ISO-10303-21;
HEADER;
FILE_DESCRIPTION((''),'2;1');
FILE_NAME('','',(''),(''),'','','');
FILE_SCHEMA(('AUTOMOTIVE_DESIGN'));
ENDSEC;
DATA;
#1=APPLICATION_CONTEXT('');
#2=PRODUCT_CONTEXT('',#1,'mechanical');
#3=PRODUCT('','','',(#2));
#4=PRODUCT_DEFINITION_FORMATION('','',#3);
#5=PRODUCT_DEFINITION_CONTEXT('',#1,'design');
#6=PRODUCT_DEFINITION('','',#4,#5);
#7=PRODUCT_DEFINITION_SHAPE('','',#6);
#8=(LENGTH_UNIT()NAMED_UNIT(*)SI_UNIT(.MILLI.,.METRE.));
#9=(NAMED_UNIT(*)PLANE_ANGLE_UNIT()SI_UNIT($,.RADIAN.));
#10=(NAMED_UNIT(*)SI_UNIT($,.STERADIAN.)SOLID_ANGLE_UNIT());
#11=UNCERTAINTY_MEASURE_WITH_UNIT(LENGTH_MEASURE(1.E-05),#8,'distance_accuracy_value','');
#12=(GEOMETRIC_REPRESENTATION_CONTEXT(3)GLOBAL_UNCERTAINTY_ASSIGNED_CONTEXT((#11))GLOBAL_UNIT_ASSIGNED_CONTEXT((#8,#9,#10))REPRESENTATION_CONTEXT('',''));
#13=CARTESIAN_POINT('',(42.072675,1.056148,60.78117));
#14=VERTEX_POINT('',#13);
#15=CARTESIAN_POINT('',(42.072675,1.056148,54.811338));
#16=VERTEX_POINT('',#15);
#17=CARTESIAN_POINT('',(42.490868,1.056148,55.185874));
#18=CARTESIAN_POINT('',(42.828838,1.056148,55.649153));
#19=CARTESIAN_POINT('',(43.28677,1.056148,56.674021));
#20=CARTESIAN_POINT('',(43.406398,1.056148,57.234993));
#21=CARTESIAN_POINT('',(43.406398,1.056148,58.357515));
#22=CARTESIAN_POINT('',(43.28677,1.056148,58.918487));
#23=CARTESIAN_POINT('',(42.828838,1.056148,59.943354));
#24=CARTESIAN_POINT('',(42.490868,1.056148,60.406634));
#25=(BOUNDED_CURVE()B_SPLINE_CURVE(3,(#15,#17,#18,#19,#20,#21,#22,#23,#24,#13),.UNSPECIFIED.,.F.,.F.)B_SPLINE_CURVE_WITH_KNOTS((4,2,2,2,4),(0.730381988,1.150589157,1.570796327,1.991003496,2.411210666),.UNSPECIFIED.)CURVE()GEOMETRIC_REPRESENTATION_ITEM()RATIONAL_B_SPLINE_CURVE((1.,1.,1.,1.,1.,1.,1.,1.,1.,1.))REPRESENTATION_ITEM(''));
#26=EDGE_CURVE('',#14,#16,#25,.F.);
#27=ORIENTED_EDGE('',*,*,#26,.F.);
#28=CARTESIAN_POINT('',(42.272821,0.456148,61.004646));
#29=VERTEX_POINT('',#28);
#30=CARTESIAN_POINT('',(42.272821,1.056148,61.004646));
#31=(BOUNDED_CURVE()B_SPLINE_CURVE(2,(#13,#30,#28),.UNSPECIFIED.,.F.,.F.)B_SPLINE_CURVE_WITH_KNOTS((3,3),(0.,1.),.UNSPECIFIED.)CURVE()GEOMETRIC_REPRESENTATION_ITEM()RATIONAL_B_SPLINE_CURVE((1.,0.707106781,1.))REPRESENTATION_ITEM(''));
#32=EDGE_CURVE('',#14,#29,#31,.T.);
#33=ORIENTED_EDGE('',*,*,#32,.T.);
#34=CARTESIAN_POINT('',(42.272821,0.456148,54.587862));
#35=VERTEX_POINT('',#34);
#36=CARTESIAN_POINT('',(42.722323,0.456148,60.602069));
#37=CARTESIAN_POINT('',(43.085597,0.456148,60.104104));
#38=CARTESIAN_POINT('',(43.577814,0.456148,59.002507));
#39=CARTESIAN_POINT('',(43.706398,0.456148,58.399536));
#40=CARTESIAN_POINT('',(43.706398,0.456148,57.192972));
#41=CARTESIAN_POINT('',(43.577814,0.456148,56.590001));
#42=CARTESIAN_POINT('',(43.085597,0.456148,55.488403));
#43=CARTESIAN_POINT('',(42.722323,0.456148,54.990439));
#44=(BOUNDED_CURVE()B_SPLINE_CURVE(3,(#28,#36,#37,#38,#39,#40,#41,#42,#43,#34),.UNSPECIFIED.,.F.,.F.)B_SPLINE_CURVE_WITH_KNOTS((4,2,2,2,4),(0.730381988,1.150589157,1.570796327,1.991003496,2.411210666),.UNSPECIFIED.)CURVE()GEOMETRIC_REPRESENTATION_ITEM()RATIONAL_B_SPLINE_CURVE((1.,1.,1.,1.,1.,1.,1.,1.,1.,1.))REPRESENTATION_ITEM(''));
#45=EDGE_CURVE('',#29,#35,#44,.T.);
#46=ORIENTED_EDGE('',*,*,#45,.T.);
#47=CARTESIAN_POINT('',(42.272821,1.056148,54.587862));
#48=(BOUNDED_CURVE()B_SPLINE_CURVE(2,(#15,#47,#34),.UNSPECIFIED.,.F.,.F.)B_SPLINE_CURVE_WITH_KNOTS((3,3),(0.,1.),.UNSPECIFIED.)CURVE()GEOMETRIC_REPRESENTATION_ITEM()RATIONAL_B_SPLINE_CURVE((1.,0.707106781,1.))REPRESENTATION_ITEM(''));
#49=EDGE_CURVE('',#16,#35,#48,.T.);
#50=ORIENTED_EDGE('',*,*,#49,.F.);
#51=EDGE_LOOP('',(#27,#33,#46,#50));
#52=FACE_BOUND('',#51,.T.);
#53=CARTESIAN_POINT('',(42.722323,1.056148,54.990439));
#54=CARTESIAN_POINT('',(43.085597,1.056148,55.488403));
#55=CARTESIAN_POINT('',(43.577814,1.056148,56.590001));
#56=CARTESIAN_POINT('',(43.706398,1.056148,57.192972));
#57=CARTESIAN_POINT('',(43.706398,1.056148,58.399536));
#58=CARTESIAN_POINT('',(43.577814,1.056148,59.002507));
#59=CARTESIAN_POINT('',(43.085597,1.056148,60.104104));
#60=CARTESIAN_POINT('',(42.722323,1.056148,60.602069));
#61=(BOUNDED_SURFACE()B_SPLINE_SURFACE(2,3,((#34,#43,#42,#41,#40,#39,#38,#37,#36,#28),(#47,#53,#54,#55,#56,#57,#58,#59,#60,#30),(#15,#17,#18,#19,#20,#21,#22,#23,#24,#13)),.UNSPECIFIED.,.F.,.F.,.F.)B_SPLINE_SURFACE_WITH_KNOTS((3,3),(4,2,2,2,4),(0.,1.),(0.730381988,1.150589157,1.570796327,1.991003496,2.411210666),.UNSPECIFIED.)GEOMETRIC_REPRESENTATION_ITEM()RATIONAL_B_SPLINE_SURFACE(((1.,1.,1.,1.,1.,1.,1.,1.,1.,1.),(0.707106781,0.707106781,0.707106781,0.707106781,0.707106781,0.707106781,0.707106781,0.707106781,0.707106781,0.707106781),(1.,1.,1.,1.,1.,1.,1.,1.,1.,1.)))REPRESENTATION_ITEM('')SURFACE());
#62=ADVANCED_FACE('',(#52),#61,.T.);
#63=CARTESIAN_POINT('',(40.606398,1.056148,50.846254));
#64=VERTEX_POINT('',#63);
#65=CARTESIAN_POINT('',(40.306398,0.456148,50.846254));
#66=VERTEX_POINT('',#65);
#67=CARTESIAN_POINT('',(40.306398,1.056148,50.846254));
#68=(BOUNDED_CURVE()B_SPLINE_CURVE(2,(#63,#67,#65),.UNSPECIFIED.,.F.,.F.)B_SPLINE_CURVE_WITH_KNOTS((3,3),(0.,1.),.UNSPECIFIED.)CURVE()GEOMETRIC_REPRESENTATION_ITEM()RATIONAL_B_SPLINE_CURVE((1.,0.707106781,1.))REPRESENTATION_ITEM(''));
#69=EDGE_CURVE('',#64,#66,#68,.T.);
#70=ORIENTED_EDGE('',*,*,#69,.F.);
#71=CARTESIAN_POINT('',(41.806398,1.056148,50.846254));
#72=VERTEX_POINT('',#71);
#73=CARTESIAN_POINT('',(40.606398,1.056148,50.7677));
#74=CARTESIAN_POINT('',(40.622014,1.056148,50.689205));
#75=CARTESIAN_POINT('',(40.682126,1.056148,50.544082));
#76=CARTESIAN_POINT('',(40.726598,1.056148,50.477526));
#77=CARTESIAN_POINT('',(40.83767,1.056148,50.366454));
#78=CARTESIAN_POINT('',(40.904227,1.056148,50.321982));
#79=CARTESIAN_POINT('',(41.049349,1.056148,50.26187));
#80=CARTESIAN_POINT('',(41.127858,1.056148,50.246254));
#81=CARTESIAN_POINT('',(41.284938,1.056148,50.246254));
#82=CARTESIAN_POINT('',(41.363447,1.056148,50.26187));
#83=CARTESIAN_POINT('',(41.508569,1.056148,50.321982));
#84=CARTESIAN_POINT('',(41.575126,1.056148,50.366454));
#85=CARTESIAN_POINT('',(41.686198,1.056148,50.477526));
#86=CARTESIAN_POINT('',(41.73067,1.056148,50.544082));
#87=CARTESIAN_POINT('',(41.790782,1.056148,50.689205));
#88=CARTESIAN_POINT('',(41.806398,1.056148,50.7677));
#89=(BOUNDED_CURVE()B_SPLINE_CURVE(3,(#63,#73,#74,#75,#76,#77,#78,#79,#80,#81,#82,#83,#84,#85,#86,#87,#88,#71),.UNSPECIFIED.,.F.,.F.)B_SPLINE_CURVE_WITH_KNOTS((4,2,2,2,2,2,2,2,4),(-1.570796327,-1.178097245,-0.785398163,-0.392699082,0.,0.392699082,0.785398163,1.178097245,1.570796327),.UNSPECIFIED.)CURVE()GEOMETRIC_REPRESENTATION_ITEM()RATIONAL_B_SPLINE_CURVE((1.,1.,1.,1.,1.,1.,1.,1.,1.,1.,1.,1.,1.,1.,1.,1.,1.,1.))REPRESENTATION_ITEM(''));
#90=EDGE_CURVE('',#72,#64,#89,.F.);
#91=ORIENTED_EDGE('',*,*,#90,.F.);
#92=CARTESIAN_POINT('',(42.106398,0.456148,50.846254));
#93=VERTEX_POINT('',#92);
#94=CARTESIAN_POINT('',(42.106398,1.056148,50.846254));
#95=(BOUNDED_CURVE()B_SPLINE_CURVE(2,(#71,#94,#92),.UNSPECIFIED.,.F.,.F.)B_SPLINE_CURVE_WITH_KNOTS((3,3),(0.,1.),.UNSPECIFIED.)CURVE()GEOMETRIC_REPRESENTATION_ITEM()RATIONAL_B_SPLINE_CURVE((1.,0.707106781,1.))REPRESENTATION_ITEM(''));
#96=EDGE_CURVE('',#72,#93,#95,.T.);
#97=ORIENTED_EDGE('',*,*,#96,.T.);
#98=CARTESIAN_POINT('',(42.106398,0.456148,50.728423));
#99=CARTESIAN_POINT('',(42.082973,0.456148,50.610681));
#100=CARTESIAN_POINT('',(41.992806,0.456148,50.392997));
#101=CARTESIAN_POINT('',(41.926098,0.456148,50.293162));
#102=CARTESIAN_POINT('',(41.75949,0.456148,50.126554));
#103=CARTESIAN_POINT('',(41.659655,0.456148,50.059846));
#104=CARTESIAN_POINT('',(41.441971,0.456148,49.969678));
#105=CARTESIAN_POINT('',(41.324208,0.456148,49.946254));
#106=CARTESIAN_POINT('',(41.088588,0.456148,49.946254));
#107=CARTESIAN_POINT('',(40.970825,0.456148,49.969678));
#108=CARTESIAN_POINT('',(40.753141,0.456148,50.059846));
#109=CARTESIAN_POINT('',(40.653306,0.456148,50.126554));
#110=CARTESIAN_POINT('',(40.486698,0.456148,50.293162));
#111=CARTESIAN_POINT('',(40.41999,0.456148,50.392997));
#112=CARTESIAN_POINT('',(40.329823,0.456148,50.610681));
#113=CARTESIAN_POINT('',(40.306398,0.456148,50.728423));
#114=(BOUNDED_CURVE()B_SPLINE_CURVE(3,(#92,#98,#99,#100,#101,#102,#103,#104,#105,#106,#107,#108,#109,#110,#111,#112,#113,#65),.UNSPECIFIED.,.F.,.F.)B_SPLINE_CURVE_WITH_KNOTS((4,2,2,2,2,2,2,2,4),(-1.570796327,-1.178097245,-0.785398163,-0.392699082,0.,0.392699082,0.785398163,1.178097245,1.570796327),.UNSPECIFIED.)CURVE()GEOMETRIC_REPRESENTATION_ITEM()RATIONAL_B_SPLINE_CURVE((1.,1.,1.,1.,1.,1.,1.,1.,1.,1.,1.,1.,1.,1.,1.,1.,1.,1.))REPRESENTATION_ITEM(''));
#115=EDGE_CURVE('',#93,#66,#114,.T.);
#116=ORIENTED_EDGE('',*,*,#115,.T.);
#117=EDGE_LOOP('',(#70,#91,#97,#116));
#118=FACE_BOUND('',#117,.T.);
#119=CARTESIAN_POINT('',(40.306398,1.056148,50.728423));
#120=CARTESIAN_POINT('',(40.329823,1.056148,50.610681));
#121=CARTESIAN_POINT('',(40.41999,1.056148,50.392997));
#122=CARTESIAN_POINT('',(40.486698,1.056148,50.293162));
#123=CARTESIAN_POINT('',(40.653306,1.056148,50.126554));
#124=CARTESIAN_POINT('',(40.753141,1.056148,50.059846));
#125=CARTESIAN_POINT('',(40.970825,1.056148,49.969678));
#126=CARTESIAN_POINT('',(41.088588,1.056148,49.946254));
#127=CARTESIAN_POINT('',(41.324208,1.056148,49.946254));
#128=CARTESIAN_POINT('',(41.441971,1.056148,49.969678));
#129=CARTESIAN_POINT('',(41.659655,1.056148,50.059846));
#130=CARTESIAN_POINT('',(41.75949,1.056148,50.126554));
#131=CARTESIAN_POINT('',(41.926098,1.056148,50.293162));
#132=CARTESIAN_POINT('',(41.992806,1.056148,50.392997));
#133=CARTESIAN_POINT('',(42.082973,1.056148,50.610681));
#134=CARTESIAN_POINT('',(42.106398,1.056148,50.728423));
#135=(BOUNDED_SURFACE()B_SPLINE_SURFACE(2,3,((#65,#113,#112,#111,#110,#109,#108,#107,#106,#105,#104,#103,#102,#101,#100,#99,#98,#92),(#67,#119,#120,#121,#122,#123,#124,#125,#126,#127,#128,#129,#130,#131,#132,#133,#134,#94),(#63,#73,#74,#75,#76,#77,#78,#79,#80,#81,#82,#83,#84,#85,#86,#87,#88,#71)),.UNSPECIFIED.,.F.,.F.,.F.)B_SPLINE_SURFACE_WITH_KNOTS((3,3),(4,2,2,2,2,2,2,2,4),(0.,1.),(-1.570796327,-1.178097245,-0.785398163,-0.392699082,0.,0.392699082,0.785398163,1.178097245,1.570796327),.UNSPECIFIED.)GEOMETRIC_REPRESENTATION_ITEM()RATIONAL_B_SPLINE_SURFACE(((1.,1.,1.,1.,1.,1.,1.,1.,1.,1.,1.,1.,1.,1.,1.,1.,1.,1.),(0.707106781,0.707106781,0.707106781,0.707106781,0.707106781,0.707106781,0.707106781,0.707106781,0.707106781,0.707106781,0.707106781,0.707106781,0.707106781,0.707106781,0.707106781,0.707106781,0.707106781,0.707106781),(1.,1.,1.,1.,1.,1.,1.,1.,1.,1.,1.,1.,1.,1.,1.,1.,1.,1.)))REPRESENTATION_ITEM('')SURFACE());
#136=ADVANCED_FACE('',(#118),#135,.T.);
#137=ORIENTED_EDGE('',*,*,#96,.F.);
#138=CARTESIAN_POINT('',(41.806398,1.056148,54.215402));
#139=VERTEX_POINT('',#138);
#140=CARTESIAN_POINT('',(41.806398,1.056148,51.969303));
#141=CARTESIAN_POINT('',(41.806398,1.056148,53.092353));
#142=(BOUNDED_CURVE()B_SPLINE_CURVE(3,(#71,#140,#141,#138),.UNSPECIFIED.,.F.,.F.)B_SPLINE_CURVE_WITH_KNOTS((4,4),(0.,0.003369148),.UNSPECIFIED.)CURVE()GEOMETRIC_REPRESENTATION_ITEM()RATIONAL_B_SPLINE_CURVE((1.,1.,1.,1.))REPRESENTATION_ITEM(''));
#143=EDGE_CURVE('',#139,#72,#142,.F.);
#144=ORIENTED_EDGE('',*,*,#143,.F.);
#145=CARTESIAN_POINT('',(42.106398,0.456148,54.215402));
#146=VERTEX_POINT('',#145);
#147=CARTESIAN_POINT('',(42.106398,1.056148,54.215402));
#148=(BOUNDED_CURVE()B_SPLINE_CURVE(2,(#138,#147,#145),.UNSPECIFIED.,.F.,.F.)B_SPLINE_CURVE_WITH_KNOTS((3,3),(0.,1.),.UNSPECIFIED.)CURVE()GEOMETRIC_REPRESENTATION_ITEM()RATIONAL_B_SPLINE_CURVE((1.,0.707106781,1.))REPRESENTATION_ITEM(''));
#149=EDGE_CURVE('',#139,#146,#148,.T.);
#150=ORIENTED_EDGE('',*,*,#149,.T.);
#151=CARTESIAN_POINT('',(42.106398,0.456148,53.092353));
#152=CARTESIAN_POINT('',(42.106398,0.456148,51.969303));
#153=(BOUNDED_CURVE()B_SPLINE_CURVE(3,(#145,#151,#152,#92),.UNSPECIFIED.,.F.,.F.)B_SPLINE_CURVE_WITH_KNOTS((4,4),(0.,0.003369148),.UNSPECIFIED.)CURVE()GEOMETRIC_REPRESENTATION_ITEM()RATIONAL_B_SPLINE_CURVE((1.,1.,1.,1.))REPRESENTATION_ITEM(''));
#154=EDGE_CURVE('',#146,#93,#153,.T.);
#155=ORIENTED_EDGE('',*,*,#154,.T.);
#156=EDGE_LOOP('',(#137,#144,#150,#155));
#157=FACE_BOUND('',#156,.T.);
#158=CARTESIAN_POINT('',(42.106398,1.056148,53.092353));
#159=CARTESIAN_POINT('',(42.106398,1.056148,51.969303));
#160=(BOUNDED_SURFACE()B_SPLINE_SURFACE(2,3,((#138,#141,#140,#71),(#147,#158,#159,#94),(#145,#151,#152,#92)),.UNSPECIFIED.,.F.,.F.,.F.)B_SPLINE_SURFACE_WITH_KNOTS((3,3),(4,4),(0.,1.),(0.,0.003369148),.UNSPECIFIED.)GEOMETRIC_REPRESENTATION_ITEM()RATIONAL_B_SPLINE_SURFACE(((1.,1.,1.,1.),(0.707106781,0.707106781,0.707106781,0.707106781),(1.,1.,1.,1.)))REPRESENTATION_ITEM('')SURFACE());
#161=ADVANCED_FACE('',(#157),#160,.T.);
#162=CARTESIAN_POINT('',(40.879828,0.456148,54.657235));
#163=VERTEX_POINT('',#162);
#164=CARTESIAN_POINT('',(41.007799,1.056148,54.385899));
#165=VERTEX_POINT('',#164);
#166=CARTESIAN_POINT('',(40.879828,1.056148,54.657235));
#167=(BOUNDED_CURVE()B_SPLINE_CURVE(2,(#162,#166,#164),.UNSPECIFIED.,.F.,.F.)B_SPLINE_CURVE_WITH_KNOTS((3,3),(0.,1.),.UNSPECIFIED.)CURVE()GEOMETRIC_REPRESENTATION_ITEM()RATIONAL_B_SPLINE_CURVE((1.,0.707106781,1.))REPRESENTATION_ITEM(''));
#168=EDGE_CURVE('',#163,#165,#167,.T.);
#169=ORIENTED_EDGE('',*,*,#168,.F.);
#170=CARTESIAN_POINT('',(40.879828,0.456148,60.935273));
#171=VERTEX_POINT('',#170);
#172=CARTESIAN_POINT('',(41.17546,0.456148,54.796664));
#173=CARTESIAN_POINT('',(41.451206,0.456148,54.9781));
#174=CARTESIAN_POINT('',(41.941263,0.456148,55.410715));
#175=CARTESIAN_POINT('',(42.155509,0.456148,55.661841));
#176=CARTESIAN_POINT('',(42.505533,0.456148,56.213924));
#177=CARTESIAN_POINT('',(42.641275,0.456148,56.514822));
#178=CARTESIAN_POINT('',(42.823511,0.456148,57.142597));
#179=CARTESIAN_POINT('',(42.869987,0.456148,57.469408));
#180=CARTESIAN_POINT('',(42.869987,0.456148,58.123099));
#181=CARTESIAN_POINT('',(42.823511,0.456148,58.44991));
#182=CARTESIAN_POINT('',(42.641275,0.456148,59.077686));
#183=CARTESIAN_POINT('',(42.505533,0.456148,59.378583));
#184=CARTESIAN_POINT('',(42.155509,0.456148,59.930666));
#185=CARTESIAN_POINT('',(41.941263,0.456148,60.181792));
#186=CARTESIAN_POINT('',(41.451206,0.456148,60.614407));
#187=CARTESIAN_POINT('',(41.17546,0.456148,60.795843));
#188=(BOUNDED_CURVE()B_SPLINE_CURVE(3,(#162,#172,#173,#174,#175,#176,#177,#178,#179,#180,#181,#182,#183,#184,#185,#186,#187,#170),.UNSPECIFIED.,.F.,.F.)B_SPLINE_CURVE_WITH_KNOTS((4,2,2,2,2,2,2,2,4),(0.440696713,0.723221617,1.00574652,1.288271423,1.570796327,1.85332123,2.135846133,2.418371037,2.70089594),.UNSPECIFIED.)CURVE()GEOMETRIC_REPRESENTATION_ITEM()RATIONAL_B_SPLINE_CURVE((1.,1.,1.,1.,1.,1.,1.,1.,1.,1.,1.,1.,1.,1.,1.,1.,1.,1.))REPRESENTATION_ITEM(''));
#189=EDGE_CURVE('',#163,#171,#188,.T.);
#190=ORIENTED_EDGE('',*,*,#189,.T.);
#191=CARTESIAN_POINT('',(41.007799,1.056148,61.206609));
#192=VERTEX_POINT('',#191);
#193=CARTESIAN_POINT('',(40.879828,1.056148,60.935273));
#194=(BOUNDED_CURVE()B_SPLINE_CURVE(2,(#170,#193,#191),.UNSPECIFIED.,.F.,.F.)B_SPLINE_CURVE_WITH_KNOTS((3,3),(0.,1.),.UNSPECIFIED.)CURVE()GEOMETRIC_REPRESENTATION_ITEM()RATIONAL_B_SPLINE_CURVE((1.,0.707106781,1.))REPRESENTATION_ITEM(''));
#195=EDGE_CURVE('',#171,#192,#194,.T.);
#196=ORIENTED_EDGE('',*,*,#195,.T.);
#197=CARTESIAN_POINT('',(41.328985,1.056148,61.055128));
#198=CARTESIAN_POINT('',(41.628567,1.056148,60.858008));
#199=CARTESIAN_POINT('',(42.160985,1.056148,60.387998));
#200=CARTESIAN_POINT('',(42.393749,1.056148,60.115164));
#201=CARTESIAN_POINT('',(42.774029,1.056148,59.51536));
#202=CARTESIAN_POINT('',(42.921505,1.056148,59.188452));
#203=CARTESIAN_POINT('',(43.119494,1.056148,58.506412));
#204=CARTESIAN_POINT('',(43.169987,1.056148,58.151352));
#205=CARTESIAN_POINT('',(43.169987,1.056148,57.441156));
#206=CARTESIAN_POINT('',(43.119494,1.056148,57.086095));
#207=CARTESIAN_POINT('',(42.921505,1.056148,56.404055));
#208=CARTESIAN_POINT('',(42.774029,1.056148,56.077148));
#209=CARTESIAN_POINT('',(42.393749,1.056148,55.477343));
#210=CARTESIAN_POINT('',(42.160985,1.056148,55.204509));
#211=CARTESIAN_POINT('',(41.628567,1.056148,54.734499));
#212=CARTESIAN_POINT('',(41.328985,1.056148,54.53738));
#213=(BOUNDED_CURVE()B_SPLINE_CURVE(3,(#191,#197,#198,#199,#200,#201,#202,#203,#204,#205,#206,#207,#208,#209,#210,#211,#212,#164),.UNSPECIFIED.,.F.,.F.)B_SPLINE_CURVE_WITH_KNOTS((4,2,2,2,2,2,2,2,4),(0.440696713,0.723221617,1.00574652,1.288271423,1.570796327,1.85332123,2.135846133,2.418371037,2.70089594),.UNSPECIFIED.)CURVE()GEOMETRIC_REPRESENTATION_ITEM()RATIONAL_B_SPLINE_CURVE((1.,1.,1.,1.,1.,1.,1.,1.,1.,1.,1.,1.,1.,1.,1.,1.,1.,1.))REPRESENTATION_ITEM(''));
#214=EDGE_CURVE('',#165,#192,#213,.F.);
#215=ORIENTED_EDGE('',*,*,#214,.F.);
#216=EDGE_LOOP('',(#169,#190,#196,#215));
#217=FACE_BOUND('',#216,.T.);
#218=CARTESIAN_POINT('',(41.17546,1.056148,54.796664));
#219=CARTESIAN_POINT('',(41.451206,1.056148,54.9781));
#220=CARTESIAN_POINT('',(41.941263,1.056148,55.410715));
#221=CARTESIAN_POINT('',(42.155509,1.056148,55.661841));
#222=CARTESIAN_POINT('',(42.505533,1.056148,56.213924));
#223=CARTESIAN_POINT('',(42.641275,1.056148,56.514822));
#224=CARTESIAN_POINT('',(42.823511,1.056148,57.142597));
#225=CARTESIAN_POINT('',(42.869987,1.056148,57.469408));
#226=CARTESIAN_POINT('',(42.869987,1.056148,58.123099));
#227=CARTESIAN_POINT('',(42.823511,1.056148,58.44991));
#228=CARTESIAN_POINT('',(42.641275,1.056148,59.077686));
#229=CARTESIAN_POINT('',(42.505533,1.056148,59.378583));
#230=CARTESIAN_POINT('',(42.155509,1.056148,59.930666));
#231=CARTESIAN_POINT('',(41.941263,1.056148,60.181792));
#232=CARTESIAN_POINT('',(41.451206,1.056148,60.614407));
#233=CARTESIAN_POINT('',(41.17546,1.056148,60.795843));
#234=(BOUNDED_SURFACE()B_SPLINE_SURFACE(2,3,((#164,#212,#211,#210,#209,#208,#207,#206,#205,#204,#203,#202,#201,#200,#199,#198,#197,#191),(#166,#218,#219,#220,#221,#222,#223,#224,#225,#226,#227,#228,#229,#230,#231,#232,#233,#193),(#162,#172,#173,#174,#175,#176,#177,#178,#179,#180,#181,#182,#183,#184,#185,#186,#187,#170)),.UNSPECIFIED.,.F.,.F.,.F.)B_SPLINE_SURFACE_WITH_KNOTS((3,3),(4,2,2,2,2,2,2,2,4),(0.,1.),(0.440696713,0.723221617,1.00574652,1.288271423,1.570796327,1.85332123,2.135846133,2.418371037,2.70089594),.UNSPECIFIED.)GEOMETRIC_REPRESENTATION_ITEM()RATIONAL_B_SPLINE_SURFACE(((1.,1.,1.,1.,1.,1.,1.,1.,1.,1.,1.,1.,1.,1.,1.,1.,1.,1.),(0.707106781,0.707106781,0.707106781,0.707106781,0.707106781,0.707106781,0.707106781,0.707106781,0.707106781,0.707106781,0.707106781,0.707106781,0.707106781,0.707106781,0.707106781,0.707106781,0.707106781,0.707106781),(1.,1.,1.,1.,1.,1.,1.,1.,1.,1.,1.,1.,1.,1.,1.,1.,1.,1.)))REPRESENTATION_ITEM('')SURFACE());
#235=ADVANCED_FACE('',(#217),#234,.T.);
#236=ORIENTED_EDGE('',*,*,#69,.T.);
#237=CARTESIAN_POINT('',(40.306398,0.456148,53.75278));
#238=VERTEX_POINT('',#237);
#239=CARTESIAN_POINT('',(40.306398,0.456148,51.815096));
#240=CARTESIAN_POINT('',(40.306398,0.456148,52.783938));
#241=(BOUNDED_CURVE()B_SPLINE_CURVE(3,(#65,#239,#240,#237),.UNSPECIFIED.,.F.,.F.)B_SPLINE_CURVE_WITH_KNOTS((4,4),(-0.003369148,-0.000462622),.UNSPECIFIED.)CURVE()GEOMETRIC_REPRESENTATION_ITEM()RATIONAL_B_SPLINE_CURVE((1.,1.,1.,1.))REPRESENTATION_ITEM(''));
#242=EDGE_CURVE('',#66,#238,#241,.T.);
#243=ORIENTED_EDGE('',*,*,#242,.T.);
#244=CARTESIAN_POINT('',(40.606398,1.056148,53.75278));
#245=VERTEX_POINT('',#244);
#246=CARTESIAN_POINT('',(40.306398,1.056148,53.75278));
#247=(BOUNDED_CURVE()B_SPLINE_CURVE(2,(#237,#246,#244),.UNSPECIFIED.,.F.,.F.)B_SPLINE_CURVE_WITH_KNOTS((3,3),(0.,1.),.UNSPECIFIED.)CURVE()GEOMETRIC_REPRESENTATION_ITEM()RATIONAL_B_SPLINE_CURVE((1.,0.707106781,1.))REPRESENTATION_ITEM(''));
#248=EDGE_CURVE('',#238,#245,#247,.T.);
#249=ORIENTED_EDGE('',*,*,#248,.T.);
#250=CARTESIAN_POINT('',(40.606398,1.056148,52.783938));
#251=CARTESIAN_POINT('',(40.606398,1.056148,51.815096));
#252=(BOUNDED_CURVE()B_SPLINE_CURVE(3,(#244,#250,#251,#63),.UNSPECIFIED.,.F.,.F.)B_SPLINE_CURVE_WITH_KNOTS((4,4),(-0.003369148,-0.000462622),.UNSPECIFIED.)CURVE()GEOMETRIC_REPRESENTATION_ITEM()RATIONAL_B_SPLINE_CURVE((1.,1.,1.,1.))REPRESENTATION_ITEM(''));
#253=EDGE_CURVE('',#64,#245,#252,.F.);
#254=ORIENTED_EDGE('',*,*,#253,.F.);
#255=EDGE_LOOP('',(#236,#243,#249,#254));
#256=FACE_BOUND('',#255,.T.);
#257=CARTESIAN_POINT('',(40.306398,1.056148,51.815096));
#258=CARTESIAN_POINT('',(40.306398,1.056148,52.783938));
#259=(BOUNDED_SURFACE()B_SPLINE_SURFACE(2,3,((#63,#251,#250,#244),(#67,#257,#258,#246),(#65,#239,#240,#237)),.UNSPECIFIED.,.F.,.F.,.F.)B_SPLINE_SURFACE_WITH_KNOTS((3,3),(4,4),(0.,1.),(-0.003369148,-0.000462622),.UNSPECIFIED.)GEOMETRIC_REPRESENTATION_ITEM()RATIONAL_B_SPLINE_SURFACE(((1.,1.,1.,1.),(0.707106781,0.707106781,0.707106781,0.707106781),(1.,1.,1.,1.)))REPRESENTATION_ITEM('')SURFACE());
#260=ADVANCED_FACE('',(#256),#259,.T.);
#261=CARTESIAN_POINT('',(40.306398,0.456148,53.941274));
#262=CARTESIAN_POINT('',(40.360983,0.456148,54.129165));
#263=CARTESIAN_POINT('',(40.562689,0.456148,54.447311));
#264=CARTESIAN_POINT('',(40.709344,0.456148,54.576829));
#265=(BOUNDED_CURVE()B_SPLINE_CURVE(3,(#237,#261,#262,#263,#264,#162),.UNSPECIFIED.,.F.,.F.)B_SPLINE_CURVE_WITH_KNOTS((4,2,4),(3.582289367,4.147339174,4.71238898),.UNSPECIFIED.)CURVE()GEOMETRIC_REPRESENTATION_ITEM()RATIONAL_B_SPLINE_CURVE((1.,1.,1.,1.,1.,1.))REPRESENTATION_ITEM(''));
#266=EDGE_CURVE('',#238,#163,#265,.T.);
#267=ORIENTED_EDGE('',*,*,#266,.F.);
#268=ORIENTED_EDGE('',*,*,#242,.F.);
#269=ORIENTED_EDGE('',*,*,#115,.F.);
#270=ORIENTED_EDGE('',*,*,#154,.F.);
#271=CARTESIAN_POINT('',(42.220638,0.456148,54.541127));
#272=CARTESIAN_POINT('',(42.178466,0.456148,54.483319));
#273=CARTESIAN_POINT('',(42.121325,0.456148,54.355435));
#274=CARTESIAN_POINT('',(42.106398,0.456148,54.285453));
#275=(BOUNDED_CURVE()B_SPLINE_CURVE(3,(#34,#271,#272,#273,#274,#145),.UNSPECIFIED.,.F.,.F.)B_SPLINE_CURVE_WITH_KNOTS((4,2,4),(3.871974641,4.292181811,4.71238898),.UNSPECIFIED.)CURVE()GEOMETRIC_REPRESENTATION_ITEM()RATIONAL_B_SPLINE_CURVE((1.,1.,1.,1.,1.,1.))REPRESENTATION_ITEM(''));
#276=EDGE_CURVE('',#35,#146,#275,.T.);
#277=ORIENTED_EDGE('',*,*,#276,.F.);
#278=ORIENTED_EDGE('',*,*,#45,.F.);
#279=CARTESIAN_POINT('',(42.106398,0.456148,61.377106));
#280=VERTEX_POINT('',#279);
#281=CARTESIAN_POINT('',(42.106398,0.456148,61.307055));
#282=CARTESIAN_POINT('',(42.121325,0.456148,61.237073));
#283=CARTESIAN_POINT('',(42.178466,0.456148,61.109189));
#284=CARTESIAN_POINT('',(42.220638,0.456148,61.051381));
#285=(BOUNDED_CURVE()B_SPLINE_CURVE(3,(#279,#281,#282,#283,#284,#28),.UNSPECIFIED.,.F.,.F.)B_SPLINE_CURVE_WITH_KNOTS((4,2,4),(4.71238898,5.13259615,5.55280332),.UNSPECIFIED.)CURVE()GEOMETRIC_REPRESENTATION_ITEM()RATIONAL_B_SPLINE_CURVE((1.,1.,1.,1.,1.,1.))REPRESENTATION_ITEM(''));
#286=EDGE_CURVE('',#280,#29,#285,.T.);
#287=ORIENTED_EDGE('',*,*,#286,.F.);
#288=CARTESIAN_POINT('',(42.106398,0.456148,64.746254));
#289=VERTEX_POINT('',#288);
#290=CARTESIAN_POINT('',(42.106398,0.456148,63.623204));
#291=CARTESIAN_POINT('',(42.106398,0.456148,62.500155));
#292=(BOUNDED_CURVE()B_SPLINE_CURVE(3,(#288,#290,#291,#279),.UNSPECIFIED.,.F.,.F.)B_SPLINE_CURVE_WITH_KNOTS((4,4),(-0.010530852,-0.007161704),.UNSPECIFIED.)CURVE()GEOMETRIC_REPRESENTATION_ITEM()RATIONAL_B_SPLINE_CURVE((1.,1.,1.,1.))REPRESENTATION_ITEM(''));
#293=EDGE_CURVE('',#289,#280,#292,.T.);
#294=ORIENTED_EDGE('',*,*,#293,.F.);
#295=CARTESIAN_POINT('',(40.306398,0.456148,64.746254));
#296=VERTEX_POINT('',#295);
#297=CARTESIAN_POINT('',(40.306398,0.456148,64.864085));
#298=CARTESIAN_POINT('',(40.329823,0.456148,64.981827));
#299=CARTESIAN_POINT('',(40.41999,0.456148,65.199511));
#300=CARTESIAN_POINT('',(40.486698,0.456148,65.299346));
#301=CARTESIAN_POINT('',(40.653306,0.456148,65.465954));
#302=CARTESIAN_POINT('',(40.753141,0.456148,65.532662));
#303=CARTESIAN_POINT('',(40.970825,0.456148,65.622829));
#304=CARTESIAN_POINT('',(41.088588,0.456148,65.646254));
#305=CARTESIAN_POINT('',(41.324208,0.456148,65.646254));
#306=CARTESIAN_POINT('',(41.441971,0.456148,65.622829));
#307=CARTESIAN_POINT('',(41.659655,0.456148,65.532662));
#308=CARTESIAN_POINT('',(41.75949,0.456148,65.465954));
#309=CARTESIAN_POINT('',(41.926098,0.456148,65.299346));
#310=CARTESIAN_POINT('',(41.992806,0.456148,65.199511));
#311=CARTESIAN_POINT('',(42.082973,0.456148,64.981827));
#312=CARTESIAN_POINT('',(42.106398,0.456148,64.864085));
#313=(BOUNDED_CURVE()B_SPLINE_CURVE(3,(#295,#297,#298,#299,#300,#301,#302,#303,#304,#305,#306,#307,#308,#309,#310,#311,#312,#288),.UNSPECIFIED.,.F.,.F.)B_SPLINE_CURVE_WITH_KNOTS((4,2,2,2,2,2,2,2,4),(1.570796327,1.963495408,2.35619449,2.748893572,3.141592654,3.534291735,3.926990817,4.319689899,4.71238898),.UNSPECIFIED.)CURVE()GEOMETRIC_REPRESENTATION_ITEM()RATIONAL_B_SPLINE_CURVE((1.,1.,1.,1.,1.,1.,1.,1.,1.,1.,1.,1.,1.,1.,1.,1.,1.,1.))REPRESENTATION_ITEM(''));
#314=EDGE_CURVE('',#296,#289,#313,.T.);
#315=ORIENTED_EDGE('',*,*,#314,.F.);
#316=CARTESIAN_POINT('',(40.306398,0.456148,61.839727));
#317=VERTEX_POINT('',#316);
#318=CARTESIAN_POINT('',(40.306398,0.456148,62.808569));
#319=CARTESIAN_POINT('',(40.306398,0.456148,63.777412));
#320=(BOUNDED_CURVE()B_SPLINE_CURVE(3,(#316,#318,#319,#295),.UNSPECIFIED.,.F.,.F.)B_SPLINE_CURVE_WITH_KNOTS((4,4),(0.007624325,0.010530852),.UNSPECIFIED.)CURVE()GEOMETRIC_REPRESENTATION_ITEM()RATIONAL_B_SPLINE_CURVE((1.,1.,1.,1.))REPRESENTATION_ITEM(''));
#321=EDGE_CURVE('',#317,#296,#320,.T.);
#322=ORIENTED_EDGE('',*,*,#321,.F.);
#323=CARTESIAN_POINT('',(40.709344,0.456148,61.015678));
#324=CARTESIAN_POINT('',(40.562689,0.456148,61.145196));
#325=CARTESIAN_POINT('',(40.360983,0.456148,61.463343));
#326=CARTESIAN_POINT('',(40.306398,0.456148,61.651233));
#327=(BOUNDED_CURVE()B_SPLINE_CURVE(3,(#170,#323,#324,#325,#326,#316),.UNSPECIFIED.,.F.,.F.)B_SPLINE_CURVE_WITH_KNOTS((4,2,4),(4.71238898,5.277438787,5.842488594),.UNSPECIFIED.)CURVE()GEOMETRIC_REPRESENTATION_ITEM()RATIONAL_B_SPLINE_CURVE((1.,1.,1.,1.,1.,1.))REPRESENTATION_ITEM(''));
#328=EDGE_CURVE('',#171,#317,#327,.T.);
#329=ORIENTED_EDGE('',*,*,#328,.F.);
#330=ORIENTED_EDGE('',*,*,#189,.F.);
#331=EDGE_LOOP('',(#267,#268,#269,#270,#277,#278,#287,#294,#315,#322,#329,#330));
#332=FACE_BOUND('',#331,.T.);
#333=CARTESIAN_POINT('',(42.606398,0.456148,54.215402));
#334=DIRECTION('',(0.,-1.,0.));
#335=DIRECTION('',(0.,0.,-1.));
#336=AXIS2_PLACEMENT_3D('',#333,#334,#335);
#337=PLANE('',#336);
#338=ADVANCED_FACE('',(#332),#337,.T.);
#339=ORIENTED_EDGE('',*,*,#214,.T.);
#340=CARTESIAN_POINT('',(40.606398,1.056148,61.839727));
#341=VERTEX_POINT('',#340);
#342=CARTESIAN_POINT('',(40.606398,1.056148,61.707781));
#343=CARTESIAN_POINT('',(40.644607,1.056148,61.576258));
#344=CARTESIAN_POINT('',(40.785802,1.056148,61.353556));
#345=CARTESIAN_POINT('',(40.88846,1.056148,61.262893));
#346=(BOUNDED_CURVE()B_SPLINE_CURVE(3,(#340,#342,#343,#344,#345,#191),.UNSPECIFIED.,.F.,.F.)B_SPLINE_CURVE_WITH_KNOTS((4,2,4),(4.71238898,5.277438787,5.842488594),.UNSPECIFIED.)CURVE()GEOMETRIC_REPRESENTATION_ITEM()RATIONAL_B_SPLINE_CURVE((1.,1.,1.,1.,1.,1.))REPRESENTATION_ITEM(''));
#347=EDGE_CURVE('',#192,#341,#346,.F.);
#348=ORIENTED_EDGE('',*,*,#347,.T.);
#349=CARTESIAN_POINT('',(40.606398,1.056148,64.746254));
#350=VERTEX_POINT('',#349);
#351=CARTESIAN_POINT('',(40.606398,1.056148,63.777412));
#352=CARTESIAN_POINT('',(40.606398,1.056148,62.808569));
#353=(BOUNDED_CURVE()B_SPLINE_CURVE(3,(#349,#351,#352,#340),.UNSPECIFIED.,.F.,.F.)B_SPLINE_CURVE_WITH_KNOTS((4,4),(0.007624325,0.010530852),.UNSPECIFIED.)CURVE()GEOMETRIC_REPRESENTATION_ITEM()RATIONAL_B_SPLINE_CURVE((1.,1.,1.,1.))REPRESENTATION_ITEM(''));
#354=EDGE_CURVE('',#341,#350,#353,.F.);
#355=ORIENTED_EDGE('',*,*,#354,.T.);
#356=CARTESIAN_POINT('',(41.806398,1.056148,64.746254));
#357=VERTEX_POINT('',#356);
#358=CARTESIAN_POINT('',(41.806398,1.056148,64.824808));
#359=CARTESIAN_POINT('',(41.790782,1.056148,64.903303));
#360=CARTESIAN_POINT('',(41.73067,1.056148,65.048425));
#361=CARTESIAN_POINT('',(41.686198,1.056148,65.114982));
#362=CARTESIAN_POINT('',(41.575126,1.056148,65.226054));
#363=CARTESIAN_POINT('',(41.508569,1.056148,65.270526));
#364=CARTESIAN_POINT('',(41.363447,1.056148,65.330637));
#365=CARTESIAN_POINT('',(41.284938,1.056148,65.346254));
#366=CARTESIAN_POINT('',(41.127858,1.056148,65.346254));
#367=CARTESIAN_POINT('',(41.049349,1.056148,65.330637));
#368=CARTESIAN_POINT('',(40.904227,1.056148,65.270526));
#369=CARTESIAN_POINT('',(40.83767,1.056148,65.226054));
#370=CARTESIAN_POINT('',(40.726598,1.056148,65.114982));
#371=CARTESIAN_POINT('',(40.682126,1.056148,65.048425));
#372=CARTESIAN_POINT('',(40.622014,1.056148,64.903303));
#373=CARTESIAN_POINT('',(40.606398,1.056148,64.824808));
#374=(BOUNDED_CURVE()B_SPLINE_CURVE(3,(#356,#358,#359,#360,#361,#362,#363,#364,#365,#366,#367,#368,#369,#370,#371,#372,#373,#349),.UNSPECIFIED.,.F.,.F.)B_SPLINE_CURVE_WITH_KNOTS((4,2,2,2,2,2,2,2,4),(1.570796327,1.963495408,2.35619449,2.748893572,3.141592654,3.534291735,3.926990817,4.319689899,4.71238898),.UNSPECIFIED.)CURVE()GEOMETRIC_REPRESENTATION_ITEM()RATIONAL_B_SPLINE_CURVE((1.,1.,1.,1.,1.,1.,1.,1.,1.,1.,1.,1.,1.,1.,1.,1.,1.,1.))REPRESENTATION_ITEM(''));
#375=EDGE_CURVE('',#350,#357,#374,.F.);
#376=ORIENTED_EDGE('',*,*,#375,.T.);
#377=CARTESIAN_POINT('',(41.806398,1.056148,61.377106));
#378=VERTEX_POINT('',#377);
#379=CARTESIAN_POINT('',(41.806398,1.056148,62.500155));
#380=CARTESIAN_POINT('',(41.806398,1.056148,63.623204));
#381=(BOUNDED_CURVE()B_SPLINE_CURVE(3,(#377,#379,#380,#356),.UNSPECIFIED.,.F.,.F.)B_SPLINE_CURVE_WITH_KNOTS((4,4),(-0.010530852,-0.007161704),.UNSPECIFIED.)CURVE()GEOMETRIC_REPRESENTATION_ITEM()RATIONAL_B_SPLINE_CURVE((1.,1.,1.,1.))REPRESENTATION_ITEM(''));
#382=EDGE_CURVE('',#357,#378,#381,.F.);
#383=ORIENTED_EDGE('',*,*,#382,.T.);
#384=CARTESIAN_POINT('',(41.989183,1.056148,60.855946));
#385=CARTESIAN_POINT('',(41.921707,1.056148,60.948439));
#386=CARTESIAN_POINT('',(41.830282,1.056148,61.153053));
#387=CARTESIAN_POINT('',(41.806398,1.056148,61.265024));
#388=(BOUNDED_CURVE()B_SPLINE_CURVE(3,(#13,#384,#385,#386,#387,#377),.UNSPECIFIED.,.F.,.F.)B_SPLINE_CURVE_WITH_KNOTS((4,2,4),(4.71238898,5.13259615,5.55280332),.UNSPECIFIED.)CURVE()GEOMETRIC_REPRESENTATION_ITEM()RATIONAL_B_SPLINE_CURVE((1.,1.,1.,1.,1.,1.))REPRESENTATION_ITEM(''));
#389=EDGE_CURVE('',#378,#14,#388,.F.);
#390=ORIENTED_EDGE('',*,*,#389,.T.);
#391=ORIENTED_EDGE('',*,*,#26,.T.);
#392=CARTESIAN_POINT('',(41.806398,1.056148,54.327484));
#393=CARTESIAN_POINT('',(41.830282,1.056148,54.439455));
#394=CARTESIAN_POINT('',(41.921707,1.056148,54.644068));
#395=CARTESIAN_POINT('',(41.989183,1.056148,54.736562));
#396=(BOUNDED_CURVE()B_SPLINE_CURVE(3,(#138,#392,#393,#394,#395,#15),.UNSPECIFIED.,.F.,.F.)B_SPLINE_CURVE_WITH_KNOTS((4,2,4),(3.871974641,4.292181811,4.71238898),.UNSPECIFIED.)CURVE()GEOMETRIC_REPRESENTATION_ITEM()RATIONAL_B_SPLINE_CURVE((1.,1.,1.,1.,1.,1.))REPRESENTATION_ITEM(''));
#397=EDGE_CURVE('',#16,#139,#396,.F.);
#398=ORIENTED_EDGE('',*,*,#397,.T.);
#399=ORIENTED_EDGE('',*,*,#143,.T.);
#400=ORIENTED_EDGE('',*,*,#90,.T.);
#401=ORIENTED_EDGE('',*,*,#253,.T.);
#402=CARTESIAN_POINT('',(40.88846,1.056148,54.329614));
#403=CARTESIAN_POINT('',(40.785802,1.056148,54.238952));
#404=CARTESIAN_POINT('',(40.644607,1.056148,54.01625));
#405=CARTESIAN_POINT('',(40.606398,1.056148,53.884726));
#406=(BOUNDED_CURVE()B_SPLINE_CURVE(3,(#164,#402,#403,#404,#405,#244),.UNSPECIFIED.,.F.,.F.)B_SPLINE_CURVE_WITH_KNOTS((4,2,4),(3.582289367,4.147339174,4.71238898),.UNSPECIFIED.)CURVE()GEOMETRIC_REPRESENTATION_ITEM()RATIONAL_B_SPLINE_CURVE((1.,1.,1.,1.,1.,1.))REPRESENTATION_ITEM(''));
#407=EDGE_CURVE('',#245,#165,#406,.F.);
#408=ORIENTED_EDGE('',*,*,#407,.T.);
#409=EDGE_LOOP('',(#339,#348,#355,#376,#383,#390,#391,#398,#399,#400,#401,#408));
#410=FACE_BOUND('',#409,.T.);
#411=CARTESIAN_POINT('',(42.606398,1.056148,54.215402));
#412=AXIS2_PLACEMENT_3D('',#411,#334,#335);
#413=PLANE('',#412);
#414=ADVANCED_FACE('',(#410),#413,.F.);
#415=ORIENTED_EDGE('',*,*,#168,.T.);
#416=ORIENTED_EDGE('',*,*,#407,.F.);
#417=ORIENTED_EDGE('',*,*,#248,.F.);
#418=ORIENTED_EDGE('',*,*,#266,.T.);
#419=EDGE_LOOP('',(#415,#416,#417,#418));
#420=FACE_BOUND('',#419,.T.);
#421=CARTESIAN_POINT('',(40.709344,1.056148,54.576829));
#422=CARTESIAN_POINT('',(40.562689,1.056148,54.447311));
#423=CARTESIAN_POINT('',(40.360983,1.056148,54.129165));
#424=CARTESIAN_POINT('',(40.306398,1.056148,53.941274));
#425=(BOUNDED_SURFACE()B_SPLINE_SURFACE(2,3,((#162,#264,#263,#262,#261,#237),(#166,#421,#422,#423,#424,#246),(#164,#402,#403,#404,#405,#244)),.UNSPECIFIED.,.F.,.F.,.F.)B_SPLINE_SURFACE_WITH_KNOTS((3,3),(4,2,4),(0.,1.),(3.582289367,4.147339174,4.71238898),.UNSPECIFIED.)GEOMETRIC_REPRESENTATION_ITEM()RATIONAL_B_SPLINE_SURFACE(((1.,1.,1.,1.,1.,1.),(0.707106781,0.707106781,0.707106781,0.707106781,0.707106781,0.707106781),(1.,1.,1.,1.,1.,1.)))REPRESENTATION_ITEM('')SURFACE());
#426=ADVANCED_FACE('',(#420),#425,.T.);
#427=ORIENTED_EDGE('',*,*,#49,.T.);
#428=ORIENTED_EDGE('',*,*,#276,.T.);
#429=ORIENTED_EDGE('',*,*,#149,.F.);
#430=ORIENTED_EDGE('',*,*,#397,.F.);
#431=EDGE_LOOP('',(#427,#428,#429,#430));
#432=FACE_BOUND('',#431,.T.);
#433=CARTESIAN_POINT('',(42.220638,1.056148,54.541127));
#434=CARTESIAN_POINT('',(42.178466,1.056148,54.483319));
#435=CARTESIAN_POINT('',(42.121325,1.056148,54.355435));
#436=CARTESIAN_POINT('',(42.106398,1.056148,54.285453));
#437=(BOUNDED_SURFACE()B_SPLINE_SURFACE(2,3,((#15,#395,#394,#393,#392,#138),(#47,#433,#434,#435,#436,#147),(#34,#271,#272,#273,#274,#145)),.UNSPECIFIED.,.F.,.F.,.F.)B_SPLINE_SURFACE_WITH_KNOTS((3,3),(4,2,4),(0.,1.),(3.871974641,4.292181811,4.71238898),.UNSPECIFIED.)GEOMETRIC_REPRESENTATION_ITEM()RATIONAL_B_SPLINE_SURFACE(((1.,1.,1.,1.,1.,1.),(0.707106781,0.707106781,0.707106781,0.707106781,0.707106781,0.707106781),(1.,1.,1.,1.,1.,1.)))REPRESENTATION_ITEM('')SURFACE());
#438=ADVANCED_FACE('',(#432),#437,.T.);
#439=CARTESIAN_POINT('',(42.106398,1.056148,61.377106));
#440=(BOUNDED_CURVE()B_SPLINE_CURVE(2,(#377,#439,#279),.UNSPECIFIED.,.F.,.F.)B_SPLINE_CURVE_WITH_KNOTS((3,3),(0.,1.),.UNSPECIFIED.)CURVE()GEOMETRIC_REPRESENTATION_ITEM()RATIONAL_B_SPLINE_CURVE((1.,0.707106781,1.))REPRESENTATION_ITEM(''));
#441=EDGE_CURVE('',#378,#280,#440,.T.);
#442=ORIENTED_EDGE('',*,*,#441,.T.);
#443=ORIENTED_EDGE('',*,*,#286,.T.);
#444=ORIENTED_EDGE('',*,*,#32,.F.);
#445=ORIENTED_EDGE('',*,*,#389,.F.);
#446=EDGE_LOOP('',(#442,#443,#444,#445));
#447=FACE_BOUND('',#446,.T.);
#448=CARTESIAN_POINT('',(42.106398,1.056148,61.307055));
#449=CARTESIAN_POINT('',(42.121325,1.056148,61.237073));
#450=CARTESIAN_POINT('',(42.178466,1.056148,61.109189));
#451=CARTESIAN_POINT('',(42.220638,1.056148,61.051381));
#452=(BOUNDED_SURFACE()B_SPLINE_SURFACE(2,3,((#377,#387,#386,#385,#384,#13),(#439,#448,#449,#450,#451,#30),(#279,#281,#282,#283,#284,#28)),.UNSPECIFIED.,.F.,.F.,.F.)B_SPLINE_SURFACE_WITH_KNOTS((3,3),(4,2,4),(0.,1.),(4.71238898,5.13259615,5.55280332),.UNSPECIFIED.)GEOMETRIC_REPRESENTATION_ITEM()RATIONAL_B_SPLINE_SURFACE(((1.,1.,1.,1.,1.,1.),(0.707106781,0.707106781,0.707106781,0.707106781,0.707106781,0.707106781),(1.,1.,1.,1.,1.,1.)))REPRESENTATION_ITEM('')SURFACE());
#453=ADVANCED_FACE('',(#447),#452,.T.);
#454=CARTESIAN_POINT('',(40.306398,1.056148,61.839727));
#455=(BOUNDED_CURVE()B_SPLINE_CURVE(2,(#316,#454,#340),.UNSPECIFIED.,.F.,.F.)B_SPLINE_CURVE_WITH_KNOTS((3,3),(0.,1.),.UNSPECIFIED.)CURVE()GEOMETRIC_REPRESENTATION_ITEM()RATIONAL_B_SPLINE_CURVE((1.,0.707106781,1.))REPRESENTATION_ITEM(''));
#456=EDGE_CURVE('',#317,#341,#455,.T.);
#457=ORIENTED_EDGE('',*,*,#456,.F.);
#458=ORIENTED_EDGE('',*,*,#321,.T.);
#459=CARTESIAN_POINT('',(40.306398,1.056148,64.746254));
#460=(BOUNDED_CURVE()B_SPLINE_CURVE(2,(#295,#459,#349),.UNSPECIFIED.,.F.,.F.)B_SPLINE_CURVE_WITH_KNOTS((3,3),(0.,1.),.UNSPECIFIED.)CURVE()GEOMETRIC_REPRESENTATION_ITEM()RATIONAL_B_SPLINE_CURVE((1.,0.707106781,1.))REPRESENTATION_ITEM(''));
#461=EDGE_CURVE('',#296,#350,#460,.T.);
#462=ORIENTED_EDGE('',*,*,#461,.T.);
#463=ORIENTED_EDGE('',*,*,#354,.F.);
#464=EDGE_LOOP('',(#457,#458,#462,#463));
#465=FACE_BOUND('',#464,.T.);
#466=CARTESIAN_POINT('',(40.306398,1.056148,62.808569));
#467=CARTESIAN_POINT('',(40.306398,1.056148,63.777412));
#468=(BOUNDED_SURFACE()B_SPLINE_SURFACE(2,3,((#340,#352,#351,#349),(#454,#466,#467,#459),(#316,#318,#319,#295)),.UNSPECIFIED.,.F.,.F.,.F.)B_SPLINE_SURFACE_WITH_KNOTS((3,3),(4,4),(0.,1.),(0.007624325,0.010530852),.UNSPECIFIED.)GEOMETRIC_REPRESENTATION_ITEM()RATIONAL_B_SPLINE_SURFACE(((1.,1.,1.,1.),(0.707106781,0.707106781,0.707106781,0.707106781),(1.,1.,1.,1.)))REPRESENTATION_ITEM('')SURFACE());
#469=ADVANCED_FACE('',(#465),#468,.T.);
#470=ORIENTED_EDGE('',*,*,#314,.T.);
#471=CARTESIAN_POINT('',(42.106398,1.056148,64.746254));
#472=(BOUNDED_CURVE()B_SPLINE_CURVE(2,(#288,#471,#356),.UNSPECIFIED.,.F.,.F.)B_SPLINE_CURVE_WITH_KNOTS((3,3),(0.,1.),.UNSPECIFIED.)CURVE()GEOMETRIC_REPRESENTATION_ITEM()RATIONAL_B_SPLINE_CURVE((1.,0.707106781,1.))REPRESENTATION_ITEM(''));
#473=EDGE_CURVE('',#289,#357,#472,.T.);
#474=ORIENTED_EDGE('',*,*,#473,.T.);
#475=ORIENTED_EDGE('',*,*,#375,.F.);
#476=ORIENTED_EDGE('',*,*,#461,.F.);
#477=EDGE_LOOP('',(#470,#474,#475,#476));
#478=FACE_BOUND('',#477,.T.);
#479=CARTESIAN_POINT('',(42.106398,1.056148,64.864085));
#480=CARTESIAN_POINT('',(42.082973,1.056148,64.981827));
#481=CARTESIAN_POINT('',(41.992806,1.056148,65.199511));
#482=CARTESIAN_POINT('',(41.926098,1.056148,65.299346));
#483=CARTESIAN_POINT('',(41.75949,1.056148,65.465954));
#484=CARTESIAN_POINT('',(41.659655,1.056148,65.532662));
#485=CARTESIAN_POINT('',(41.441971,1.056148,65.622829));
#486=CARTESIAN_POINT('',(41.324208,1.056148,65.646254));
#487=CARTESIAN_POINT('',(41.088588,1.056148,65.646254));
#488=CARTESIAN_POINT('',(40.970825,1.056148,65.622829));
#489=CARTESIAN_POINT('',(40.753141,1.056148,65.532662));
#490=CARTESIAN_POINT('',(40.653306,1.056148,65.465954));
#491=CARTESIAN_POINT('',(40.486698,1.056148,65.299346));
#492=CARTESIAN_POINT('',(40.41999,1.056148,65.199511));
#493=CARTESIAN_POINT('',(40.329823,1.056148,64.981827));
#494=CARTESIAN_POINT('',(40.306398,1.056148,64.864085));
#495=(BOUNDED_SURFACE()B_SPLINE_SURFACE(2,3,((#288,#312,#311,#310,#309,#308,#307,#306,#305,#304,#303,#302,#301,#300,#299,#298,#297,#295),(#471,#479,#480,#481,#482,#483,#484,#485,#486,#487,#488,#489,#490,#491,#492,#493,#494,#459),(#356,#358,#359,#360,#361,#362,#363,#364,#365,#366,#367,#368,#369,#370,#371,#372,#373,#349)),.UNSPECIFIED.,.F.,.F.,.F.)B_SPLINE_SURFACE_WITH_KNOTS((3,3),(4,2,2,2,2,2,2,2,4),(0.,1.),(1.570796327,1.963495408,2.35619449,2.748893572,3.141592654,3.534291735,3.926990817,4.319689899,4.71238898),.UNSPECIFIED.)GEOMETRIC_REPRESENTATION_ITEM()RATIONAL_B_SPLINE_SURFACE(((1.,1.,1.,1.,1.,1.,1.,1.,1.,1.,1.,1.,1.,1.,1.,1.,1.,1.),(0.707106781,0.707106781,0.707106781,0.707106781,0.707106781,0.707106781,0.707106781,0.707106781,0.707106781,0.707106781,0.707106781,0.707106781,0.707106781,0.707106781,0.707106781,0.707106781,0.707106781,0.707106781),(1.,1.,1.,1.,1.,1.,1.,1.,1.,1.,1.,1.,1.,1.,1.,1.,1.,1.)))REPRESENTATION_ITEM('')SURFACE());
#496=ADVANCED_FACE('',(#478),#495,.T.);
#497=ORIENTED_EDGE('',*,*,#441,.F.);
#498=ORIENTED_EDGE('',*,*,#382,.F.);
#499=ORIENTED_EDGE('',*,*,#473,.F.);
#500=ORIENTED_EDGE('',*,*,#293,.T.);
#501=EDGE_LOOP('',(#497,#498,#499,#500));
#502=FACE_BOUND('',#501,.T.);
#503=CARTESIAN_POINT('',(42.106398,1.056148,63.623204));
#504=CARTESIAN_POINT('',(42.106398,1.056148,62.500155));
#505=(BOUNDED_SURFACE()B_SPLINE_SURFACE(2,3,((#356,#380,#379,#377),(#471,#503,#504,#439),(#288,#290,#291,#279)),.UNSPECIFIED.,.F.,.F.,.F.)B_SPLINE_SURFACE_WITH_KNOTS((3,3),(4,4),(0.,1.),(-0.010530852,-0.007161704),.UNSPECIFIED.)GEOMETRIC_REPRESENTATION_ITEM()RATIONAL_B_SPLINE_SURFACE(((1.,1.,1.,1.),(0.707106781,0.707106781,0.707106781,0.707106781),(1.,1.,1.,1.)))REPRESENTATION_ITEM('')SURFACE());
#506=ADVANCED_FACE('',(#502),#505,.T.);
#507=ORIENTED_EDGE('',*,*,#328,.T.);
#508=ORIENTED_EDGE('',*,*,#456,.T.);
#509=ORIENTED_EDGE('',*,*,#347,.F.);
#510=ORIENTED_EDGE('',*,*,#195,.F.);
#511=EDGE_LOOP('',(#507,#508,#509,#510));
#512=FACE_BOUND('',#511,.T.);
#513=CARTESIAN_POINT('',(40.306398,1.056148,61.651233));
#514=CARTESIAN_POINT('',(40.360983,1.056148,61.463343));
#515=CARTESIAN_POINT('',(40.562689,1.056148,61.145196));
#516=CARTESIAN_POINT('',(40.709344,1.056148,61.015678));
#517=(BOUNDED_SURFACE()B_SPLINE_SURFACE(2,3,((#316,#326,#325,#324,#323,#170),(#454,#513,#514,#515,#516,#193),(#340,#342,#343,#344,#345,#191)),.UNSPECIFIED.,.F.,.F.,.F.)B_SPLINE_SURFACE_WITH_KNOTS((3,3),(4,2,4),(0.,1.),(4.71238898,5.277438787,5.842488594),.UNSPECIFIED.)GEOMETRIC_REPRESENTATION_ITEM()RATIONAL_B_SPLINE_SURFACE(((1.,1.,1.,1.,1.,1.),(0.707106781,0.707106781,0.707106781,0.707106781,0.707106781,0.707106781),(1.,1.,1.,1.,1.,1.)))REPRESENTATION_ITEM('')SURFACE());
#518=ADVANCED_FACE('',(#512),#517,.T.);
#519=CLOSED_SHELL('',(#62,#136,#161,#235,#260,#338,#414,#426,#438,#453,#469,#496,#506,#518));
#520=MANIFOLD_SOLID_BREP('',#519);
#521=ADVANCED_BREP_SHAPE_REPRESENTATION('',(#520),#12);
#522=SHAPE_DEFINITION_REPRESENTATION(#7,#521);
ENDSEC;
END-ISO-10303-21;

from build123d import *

# Parameters (mm, degrees)
SALIENTE_EXTRUIR1_DEPTH = 0.6
REDONDEO2_SIZE          = 0.6
REDONDEO2_SIZE_2        = 0.3


with BuildPart() as part:
    # Croquis1 → Saliente-Extruir1 (new body)
    with BuildSketch(Plane(origin=(0, 0.456148123, 0), x_dir=(1, 0, 0), z_dir=(0, 1, 0))):
        with BuildLine():
            Line((42.106397954, -64.746253755), (42.106397954, -61.377105609))
            ThreePointArc((42.106397954, -61.377105609), (42.149895732, -61.173130805), (42.272820837, -61.004645803))
            ThreePointArc((42.272820837, -61.004645803), (43.706397954, -57.796253755), (42.272820837, -54.587861707))
            ThreePointArc((42.272820837, -54.587861707), (42.149895732, -54.419376705), (42.106397954, -54.215401901))
            Line((42.106397954, -54.215401901), (42.106397954, -50.846253755))
            ThreePointArc((42.106397954, -50.846253755), (41.206397954, -49.946253755), (40.306397954, -50.846253755))
            Line((40.306397954, -50.846253755), (40.306397954, -53.752780221))
            ThreePointArc((40.306397954, -53.752780221), (40.461836022, -54.288238102), (40.87982824, -54.657234907))
            ThreePointArc((40.87982824, -54.657234907), (42.869987065, -57.796253755), (40.87982824, -60.935272603))
            ThreePointArc((40.87982824, -60.935272603), (40.461836022, -61.304269408), (40.306397954, -61.839727289))
            Line((40.306397954, -61.839727289), (40.306397954, -64.746253755))
            ThreePointArc((40.306397954, -64.746253755), (41.206397954, -65.646253755), (42.106397954, -64.746253755))
        make_face()
    extrude(amount=SALIENTE_EXTRUIR1_DEPTH)

    # Redondeo2
    # an asymmetric fillet: 0.6, 0.3 mm, written as the material it takes off along each edge
    with BuildSketch(Plane(origin=(40.306397954, 1.056148123, 50.846253755), x_dir=(0, -1, 0), z_dir=(0, 0, 1)), Plane(origin=(40.306397954, 1.056148123, 61.839727289), x_dir=(0, -1, 0), z_dir=(0, 0, 1))) as redondeo2_piece_1:
        with BuildLine():
            Bezier((REDONDEO2_SIZE, 0), (0, 0), (0, REDONDEO2_SIZE_2), weights=[1, 0.707106781, 1])
            Line((0, REDONDEO2_SIZE_2), (0, 0))
            Line((0, 0), (REDONDEO2_SIZE, 0))
        make_face()
    extrude(amount=2.906526466, mode=Mode.SUBTRACT)
    with BuildSketch(Plane(origin=(41.206397954, 1.056148123, 50.846253755), x_dir=(1, 0, 0), z_dir=(0, 0, 1))) as redondeo2_piece_2:
        with BuildLine():
            Bezier((0.9, -REDONDEO2_SIZE), (0.9, 0), (0.9 - REDONDEO2_SIZE_2, 0), weights=[1, 0.707106781, 1])
            Line((0.9 - REDONDEO2_SIZE_2, 0), (0.9, 0))
            Line((0.9, 0), (0.9, -REDONDEO2_SIZE))
        make_face()
    revolve(axis=Axis((41.206397954, 1.056148123, 50.846253755), (0, 1, 0)), revolution_arc=180, mode=Mode.SUBTRACT)
    with BuildSketch(Plane(origin=(39.399366704, 1.056148123, 57.796253755), x_dir=(0.4265697142932218, 0, -0.9044546859007361), z_dir=(-0.9044546859007361, 0, -0.4265697142932218))) as redondeo2_piece_3:
        with BuildLine():
            Bezier((3.470620361, REDONDEO2_SIZE), (3.470620361, 0), (3.470620361 + REDONDEO2_SIZE_2, 0), weights=[1, 0.707106781, 1])
            Line((3.470620361 + REDONDEO2_SIZE_2, 0), (3.470620361, 0))
            Line((3.470620361, 0), (3.470620361, REDONDEO2_SIZE))
        make_face()
    revolve(axis=Axis((39.399366704, 1.056148123, 57.796253755), (0, -1, 0)), revolution_arc=129.499876548, mode=Mode.SUBTRACT)
    with BuildSketch(Plane(origin=(42.106397954, 1.056148123, 54.215401901), x_dir=(0, -1, 0), z_dir=(0, 0, -1)), Plane(origin=(42.106397954, 1.056148123, 64.746253755), x_dir=(0, -1, 0), z_dir=(0, 0, -1))) as redondeo2_piece_4:
        with BuildLine():
            Bezier((REDONDEO2_SIZE, 0), (0, 0), (0, REDONDEO2_SIZE_2), weights=[1, 0.707106781, 1])
            Line((0, REDONDEO2_SIZE_2), (0, 0))
            Line((0, 0), (REDONDEO2_SIZE, 0))
        make_face()
    extrude(amount=3.369148146, mode=Mode.SUBTRACT)
    with BuildSketch(Plane(origin=(42.606397954, 1.056148123, 54.215401901), x_dir=(-0.6671542337071572, 0, 0.7449196120700649), z_dir=(0.7449196120700649, 0, 0.6671542337071572))) as redondeo2_piece_5:
        with BuildLine():
            Bezier((0.5, REDONDEO2_SIZE), (0.5, 0), (0.5 + REDONDEO2_SIZE_2, 0), weights=[1, 0.707106781, 1])
            Line((0.5 + REDONDEO2_SIZE_2, 0), (0.5, 0))
            Line((0.5, 0), (0.5, REDONDEO2_SIZE))
        make_face()
    revolve(axis=Axis((42.606397954, 1.056148123, 54.215401901), (0, -1, 0)), revolution_arc=48.15219468, mode=Mode.SUBTRACT)
    with BuildSketch(Plane(origin=(39.399366704, 1.056148123, 57.796253755), x_dir=(0.6671542337071441, 0, 0.7449196120700766), z_dir=(-0.7449196120700766, 0, 0.6671542337071441))) as redondeo2_piece_6:
        with BuildLine():
            Bezier((4.30703125, -REDONDEO2_SIZE), (4.30703125, 0), (4.30703125 - REDONDEO2_SIZE_2, 0), weights=[1, 0.707106781, 1])
            Line((4.30703125 - REDONDEO2_SIZE_2, 0), (4.30703125, 0))
            Line((4.30703125, 0), (4.30703125, -REDONDEO2_SIZE))
        make_face()
    revolve(axis=Axis((39.399366704, 1.056148123, 57.796253755), (0, 1, 0)), revolution_arc=96.304389359, mode=Mode.SUBTRACT)
    with BuildSketch(Plane(origin=(41.206397954, 1.056148123, 64.746253755), x_dir=(-1, 0, 0), z_dir=(0, 0, -1))) as redondeo2_piece_7:
        with BuildLine():
            Bezier((0.9, -REDONDEO2_SIZE), (0.9, 0), (0.9 - REDONDEO2_SIZE_2, 0), weights=[1, 0.707106781, 1])
            Line((0.9 - REDONDEO2_SIZE_2, 0), (0.9, 0))
            Line((0.9, 0), (0.9, -REDONDEO2_SIZE))
        make_face()
    revolve(axis=Axis((41.206397954, 1.056148123, 64.746253755), (0, 1, 0)), revolution_arc=180, mode=Mode.SUBTRACT)
    with BuildSketch(Plane(origin=(42.606397954, 1.056148123, 61.377105609), x_dir=(-1, 0, 0), z_dir=(0, 0, 1))) as redondeo2_piece_8:
        with BuildLine():
            Bezier((0.5, REDONDEO2_SIZE), (0.5, 0), (0.5 + REDONDEO2_SIZE_2, 0), weights=[1, 0.707106781, 1])
            Line((0.5 + REDONDEO2_SIZE_2, 0), (0.5, 0))
            Line((0.5, 0), (0.5, REDONDEO2_SIZE))
        make_face()
    revolve(axis=Axis((42.606397954, 1.056148123, 61.377105609), (0, -1, 0)), revolution_arc=48.15219468, mode=Mode.SUBTRACT)
    with BuildSketch(Plane(origin=(41.306397954, 1.056148123, 53.752780221), x_dir=(-1, 0, 0), z_dir=(0, 0, -1))) as redondeo2_piece_9:
        with BuildLine():
            Bezier((1, -REDONDEO2_SIZE), (1, 0), (1 - REDONDEO2_SIZE_2, 0), weights=[1, 0.707106781, 1])
            Line((1 - REDONDEO2_SIZE_2, 0), (1, 0))
            Line((1, 0), (1, -REDONDEO2_SIZE))
        make_face()
    revolve(axis=Axis((41.306397954, 1.056148123, 53.752780221), (0, 1, 0)), revolution_arc=64.749938274, mode=Mode.SUBTRACT)
    with BuildSketch(Plane(origin=(41.306397954, 1.056148123, 61.839727289), x_dir=(-0.4265697142932185, 0, -0.9044546859007376), z_dir=(0.9044546859007376, 0, -0.4265697142932185))) as redondeo2_piece_10:
        with BuildLine():
            Bezier((1, -REDONDEO2_SIZE), (1, 0), (1 - REDONDEO2_SIZE_2, 0), weights=[1, 0.707106781, 1])
            Line((1 - REDONDEO2_SIZE_2, 0), (1, 0))
            Line((1, 0), (1, -REDONDEO2_SIZE))
        make_face()
    revolve(axis=Axis((41.306397954, 1.056148123, 61.839727289), (0, 1, 0)), revolution_arc=64.749938274, mode=Mode.SUBTRACT)


solid = part.part
